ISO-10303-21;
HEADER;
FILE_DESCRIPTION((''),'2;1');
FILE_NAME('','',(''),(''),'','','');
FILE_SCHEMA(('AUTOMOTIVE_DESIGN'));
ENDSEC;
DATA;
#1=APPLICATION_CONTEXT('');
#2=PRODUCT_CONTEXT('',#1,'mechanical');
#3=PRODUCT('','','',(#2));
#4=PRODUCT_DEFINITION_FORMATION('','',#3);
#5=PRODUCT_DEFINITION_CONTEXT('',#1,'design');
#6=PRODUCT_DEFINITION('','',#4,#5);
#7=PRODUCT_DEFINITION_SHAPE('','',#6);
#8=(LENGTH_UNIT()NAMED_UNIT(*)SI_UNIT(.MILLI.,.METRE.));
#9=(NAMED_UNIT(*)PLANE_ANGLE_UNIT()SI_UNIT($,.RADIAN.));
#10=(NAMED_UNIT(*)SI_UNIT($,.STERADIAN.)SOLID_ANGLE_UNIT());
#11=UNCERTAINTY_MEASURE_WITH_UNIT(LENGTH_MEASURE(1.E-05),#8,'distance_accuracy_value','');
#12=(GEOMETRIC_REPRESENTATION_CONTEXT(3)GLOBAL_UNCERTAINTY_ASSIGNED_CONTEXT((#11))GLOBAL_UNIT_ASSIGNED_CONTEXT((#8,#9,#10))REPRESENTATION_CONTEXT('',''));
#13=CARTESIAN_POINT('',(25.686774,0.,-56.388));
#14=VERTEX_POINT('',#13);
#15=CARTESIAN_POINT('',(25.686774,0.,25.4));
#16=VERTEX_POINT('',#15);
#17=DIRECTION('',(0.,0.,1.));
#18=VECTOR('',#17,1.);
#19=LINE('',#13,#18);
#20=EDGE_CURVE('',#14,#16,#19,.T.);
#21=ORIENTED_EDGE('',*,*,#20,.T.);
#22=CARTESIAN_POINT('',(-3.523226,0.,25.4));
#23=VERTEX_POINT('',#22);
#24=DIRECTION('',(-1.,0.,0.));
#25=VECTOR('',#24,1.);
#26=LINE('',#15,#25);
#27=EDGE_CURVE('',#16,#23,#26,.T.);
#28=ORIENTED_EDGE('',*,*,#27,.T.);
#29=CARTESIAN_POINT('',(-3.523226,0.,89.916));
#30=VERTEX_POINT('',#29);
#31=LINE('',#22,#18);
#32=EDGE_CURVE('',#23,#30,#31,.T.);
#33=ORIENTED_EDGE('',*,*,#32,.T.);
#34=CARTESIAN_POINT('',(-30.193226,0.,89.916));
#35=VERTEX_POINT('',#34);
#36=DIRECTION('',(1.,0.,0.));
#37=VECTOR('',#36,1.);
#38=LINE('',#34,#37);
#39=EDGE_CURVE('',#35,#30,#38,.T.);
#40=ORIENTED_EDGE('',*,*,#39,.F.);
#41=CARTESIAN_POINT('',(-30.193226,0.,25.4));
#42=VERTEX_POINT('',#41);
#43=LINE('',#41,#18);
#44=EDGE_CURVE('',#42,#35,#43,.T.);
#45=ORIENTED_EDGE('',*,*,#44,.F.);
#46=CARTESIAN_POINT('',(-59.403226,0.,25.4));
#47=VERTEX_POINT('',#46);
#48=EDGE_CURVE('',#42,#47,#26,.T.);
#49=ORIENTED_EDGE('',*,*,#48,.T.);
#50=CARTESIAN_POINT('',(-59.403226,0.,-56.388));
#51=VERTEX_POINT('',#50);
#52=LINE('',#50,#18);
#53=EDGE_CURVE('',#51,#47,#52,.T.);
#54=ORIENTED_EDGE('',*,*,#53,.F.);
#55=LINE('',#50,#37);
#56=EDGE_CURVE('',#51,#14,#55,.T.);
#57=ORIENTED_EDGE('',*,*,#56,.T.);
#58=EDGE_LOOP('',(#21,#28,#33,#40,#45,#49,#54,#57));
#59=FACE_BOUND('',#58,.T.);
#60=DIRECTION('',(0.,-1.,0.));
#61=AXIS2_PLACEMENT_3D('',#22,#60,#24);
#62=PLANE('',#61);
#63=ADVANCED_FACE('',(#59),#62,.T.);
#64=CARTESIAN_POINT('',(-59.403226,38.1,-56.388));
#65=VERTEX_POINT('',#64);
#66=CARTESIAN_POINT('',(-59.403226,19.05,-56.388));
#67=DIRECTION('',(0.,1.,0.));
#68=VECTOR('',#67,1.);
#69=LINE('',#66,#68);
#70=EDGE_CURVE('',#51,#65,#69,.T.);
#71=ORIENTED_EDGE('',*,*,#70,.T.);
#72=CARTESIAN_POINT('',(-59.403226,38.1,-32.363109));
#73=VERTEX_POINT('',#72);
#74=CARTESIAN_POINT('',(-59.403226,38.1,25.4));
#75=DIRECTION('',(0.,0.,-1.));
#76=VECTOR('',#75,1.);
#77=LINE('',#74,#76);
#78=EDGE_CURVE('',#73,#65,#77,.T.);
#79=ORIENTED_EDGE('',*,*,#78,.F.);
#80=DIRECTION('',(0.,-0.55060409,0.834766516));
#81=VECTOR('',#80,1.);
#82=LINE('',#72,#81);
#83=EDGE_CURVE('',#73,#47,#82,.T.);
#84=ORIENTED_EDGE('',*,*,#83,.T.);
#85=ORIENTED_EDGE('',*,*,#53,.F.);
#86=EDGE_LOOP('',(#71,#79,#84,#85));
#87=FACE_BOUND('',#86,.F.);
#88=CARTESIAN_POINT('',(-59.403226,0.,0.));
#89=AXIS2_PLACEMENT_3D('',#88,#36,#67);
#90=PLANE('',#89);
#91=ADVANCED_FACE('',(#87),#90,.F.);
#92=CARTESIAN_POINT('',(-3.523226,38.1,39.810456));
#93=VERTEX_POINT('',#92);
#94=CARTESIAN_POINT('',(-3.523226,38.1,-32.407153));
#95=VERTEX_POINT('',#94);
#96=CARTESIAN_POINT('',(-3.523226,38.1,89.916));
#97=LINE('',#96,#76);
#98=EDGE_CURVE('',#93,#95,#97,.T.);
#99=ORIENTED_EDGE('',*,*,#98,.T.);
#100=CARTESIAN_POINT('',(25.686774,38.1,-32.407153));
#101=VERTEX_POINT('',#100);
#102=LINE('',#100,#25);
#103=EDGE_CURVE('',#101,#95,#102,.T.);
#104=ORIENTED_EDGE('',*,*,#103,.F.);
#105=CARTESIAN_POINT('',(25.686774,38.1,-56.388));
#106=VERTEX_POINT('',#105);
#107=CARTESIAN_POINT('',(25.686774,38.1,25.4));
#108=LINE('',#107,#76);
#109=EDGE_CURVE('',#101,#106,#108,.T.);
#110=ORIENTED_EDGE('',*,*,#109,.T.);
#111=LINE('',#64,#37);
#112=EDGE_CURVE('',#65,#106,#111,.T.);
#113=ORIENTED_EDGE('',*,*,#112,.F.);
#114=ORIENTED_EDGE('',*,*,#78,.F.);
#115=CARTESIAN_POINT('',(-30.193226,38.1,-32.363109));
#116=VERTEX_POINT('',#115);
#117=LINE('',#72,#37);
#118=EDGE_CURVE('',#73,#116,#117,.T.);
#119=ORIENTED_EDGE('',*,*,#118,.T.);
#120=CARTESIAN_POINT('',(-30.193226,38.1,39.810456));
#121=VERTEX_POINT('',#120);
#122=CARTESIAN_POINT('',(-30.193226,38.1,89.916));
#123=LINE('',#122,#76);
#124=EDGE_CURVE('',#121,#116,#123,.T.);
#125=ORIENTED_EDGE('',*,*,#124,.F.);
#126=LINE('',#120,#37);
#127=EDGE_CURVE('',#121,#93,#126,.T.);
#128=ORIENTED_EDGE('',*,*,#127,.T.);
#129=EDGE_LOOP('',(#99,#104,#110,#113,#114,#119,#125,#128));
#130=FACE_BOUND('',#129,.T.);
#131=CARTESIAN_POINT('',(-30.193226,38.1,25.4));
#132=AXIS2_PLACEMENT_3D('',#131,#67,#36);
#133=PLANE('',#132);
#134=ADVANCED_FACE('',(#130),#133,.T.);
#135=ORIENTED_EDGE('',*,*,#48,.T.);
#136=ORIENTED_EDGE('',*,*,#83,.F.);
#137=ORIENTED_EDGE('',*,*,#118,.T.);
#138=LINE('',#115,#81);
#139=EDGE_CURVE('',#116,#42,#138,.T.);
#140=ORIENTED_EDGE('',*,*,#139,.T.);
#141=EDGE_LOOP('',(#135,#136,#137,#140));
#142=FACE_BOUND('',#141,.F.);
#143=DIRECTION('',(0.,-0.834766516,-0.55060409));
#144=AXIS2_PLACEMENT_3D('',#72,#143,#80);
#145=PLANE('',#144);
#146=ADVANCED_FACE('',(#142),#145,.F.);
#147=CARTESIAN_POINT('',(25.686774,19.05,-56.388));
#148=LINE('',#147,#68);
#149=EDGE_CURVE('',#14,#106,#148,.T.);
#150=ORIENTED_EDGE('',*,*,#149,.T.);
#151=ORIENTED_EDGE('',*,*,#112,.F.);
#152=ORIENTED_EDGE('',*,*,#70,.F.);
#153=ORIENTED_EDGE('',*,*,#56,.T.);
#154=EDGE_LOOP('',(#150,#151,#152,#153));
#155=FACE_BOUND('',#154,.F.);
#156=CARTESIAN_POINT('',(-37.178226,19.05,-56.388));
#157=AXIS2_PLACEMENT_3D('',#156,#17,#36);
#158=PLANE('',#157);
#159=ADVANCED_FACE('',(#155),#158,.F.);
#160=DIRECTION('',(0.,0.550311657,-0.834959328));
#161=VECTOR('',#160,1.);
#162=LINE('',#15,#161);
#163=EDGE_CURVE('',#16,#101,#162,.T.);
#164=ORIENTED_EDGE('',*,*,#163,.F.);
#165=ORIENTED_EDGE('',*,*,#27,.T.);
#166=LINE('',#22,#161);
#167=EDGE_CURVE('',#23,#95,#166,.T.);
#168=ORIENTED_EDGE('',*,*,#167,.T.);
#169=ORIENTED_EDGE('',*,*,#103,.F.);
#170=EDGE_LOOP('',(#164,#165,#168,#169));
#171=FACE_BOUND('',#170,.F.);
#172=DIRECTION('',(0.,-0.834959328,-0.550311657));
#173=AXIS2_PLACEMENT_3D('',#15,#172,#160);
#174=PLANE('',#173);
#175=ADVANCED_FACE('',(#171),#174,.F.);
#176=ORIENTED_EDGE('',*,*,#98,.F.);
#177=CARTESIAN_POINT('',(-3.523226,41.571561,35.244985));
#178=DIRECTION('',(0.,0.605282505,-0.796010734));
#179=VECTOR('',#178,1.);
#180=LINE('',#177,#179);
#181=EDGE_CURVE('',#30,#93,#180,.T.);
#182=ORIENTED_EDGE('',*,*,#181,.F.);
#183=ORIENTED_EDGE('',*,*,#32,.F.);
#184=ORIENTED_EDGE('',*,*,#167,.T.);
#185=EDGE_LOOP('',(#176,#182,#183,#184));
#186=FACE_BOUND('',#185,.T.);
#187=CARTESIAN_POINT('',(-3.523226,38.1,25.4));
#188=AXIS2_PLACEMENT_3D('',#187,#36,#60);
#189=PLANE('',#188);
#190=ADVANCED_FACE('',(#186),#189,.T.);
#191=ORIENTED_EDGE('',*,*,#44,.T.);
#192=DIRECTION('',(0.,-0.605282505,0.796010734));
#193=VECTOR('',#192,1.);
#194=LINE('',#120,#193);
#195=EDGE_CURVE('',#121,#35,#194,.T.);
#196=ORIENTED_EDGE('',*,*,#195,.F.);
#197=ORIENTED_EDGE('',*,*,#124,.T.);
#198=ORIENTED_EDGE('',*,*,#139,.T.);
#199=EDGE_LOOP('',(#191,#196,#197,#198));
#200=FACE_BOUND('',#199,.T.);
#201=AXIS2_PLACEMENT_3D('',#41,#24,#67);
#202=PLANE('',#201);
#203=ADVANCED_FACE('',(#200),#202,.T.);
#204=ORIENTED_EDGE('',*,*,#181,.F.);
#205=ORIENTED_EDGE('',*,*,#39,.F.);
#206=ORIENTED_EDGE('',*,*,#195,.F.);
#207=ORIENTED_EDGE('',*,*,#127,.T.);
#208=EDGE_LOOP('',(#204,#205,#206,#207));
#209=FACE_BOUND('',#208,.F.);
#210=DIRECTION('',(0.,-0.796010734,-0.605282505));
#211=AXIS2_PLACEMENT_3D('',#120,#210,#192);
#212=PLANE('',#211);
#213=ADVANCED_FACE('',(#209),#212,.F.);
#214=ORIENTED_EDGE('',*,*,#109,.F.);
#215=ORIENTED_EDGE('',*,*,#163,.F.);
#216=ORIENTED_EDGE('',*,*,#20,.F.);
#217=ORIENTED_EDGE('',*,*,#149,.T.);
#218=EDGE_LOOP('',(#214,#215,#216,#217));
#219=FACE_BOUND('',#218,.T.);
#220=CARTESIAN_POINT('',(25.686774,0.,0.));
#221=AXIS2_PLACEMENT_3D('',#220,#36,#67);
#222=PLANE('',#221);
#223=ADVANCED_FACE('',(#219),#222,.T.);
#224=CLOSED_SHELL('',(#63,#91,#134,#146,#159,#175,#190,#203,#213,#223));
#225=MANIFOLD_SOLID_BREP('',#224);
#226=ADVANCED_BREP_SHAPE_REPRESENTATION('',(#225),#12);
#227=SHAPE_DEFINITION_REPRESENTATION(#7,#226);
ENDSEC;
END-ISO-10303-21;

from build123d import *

# Parameters (mm, degrees)
F0_W      = 44.45
F0_H      = 38.1
F1_DEPTH  = 25.4
F2_DEPTH  = 56.388
F3_DEPTH  = 85.09
F6_DEPTH  = 29.21
F7_DEPTH  = 29.21
F8_DEPTH  = 64.516
F10_DEPTH = 25.4
F11_DEPTH = 25.4


with BuildPart() as f1:
    # F0 (on Top) → F1 (new body)
    with BuildSketch(Plane.XY):
        with Locations((-37.1782257403, 19.05)):
            Rectangle(F0_W, F0_H)
    extrude(amount=F1_DEPTH)

    # F2 (add): a face of the model
    f2_faces = [f1.faces().sort_by_distance(p)[0] for p in [
        (-37.1782257403, 19.05, 0),
    ]]
    extrude(f2_faces, amount=F2_DEPTH)

    # F3 (add): a face of the model
    f3_faces = [f1.faces().sort_by_distance(p)[0] for p in [
        (-59.4032257403, 19.05, -15.494),
    ]]
    extrude(f3_faces, amount=-F3_DEPTH)

    # F5 (on face) → F6 (cut)
    with BuildSketch(Plane.YZ.offset(25.6867742597)):
        Polygon((0, 25.4), (38.1, -32.4071533978), (38.1, 25.4), align=None)
    extrude(amount=-F6_DEPTH, mode=Mode.SUBTRACT)

    # F4 (on face) → F7 (cut)
    with BuildSketch(Plane(origin=(-59.4032257403, 0, 0), x_dir=(0, -1, 0), z_dir=(-1, 0, 0))):
        Polygon((-38.1, 25.4), (-38.1, -32.3631092906), (0, 25.4), align=None)
    extrude(amount=-F7_DEPTH, mode=Mode.SUBTRACT)

    # F8 (add): a face of the model
    f8_faces = [f1.faces().sort_by_distance(p)[0] for p in [
        (-16.8582257403, 19.05, 25.4),
    ]]
    extrude(f8_faces, amount=F8_DEPTH)

    # F9 (on face) → F10 (cut)
    with BuildSketch(Plane(origin=(-30.1932257403, 0, 0), x_dir=(0, -1, 0), z_dir=(-1, 0, 0))):
        Polygon((-38.1, 89.916), (-38.1, 39.8104563355), (0, 89.916), align=None)
    extrude(amount=-F10_DEPTH, mode=Mode.SUBTRACT)

    # F11 (cut): a face of the model
    f11_faces = [f1.faces().sort_by_distance(p)[0] for p in [
        (-4.7932257403, 25.4, 73.2141521118),
    ]]
    extrude(f11_faces, amount=-F11_DEPTH, mode=Mode.SUBTRACT)


solid = f1.part
